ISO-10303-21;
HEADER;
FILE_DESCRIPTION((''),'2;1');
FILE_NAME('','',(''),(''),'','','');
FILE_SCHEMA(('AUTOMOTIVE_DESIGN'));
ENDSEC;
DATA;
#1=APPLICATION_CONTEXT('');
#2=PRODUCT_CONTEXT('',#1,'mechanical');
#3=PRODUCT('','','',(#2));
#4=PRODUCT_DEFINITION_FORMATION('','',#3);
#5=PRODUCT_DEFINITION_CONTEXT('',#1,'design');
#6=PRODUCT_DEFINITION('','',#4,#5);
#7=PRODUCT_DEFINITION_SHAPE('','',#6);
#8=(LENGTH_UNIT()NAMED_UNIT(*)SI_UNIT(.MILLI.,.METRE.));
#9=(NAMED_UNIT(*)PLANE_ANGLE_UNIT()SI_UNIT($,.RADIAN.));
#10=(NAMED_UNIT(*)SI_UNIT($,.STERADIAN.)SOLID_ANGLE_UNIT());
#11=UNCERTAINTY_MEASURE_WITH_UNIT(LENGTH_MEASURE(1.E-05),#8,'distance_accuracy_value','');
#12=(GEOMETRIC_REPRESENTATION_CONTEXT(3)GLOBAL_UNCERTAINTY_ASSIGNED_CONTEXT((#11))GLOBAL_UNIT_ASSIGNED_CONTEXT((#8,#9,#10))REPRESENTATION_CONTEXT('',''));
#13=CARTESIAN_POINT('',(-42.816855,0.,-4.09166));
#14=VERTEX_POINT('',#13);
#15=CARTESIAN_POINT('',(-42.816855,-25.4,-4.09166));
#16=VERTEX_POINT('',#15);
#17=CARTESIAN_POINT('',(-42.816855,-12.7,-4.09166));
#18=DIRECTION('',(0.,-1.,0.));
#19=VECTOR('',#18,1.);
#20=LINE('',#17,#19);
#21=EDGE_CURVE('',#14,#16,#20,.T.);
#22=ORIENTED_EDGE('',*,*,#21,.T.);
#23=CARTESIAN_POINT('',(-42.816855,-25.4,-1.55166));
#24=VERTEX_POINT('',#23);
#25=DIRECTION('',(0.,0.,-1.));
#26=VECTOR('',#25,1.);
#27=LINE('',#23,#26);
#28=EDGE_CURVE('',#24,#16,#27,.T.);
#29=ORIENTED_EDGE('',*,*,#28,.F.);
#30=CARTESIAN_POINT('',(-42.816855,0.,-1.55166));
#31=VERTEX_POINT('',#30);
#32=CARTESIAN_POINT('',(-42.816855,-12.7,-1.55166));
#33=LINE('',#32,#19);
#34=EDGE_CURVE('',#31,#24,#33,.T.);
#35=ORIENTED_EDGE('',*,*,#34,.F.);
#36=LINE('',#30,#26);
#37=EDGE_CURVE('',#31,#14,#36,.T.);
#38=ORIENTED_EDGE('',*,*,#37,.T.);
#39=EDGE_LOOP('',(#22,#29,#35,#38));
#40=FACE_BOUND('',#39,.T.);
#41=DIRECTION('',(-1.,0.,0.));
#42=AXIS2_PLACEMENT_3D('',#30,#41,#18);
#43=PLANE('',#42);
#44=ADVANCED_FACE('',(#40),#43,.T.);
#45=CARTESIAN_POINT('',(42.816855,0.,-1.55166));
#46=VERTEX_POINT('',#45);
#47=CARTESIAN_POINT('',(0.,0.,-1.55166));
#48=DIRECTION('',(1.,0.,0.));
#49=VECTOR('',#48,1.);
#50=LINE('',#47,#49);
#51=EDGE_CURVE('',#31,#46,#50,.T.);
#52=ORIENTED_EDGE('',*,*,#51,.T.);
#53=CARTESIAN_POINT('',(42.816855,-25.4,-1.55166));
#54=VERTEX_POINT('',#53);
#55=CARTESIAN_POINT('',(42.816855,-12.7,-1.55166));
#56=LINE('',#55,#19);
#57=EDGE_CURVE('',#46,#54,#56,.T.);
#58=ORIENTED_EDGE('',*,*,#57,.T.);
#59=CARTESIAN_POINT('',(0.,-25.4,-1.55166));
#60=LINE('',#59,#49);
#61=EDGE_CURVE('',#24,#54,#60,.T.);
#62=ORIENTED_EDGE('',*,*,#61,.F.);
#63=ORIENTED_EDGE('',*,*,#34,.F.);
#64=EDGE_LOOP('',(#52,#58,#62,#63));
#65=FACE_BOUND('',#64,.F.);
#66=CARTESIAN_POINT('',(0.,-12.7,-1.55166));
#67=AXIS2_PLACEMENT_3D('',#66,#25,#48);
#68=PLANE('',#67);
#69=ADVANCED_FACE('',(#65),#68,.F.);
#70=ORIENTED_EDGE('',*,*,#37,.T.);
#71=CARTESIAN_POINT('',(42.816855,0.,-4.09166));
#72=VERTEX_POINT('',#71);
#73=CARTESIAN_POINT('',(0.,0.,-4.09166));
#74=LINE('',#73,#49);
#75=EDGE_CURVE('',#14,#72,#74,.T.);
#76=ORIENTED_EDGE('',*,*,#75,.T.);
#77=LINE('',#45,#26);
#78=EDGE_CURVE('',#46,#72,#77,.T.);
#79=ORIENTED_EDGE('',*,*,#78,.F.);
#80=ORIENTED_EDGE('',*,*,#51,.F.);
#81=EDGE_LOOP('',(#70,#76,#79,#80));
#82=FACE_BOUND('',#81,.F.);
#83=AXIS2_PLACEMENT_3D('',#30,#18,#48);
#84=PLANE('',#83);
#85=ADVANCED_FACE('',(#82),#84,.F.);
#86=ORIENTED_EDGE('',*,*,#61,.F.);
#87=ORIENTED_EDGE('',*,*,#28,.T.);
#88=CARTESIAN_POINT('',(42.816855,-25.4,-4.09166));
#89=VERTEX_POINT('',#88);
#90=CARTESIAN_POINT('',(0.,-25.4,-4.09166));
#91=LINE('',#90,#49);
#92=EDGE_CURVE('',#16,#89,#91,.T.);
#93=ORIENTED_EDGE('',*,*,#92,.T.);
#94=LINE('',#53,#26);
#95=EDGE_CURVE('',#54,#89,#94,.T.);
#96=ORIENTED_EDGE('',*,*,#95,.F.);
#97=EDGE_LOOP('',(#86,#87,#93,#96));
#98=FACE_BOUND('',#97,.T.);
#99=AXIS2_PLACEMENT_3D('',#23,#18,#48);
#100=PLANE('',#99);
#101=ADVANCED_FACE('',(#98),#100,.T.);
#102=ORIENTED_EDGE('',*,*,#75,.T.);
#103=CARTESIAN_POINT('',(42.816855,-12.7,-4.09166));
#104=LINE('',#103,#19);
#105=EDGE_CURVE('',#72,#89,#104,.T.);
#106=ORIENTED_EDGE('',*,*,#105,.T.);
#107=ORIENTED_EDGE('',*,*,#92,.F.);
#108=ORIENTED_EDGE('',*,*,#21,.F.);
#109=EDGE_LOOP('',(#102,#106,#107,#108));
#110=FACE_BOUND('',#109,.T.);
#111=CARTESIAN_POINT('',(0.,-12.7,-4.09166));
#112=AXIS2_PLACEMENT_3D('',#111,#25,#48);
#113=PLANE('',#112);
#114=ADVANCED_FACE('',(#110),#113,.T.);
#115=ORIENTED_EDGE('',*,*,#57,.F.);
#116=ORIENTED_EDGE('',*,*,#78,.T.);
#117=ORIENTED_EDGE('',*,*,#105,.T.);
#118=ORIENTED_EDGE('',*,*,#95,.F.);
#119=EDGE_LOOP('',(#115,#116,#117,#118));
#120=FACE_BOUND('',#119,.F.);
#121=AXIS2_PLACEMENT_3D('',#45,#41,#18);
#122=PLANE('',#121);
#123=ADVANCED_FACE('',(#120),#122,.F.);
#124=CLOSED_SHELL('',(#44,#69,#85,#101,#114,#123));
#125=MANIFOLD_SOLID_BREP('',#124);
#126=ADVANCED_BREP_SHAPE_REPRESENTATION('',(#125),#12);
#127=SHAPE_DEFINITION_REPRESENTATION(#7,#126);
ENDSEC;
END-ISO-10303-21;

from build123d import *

# Parameters (mm, degrees)
F1_E0_BOTTOM_W = 85.6337100267
F1_E0_BOTTOM_H = 25.4
F2_DEPTH       = 2.54


with BuildPart() as f2:
    # F1_E0_bottom (on explicit) → F2 (new body)
    with BuildSketch(Plane(origin=(-42.8168550134, 0, -1.551660127), x_dir=(1, 0, 0), z_dir=(0, 0, -1))):
        with Locations((42.8168550134, 12.7)):
            Rectangle(F1_E0_BOTTOM_W, F1_E0_BOTTOM_H)
    extrude(amount=F2_DEPTH)


solid = f2.part
